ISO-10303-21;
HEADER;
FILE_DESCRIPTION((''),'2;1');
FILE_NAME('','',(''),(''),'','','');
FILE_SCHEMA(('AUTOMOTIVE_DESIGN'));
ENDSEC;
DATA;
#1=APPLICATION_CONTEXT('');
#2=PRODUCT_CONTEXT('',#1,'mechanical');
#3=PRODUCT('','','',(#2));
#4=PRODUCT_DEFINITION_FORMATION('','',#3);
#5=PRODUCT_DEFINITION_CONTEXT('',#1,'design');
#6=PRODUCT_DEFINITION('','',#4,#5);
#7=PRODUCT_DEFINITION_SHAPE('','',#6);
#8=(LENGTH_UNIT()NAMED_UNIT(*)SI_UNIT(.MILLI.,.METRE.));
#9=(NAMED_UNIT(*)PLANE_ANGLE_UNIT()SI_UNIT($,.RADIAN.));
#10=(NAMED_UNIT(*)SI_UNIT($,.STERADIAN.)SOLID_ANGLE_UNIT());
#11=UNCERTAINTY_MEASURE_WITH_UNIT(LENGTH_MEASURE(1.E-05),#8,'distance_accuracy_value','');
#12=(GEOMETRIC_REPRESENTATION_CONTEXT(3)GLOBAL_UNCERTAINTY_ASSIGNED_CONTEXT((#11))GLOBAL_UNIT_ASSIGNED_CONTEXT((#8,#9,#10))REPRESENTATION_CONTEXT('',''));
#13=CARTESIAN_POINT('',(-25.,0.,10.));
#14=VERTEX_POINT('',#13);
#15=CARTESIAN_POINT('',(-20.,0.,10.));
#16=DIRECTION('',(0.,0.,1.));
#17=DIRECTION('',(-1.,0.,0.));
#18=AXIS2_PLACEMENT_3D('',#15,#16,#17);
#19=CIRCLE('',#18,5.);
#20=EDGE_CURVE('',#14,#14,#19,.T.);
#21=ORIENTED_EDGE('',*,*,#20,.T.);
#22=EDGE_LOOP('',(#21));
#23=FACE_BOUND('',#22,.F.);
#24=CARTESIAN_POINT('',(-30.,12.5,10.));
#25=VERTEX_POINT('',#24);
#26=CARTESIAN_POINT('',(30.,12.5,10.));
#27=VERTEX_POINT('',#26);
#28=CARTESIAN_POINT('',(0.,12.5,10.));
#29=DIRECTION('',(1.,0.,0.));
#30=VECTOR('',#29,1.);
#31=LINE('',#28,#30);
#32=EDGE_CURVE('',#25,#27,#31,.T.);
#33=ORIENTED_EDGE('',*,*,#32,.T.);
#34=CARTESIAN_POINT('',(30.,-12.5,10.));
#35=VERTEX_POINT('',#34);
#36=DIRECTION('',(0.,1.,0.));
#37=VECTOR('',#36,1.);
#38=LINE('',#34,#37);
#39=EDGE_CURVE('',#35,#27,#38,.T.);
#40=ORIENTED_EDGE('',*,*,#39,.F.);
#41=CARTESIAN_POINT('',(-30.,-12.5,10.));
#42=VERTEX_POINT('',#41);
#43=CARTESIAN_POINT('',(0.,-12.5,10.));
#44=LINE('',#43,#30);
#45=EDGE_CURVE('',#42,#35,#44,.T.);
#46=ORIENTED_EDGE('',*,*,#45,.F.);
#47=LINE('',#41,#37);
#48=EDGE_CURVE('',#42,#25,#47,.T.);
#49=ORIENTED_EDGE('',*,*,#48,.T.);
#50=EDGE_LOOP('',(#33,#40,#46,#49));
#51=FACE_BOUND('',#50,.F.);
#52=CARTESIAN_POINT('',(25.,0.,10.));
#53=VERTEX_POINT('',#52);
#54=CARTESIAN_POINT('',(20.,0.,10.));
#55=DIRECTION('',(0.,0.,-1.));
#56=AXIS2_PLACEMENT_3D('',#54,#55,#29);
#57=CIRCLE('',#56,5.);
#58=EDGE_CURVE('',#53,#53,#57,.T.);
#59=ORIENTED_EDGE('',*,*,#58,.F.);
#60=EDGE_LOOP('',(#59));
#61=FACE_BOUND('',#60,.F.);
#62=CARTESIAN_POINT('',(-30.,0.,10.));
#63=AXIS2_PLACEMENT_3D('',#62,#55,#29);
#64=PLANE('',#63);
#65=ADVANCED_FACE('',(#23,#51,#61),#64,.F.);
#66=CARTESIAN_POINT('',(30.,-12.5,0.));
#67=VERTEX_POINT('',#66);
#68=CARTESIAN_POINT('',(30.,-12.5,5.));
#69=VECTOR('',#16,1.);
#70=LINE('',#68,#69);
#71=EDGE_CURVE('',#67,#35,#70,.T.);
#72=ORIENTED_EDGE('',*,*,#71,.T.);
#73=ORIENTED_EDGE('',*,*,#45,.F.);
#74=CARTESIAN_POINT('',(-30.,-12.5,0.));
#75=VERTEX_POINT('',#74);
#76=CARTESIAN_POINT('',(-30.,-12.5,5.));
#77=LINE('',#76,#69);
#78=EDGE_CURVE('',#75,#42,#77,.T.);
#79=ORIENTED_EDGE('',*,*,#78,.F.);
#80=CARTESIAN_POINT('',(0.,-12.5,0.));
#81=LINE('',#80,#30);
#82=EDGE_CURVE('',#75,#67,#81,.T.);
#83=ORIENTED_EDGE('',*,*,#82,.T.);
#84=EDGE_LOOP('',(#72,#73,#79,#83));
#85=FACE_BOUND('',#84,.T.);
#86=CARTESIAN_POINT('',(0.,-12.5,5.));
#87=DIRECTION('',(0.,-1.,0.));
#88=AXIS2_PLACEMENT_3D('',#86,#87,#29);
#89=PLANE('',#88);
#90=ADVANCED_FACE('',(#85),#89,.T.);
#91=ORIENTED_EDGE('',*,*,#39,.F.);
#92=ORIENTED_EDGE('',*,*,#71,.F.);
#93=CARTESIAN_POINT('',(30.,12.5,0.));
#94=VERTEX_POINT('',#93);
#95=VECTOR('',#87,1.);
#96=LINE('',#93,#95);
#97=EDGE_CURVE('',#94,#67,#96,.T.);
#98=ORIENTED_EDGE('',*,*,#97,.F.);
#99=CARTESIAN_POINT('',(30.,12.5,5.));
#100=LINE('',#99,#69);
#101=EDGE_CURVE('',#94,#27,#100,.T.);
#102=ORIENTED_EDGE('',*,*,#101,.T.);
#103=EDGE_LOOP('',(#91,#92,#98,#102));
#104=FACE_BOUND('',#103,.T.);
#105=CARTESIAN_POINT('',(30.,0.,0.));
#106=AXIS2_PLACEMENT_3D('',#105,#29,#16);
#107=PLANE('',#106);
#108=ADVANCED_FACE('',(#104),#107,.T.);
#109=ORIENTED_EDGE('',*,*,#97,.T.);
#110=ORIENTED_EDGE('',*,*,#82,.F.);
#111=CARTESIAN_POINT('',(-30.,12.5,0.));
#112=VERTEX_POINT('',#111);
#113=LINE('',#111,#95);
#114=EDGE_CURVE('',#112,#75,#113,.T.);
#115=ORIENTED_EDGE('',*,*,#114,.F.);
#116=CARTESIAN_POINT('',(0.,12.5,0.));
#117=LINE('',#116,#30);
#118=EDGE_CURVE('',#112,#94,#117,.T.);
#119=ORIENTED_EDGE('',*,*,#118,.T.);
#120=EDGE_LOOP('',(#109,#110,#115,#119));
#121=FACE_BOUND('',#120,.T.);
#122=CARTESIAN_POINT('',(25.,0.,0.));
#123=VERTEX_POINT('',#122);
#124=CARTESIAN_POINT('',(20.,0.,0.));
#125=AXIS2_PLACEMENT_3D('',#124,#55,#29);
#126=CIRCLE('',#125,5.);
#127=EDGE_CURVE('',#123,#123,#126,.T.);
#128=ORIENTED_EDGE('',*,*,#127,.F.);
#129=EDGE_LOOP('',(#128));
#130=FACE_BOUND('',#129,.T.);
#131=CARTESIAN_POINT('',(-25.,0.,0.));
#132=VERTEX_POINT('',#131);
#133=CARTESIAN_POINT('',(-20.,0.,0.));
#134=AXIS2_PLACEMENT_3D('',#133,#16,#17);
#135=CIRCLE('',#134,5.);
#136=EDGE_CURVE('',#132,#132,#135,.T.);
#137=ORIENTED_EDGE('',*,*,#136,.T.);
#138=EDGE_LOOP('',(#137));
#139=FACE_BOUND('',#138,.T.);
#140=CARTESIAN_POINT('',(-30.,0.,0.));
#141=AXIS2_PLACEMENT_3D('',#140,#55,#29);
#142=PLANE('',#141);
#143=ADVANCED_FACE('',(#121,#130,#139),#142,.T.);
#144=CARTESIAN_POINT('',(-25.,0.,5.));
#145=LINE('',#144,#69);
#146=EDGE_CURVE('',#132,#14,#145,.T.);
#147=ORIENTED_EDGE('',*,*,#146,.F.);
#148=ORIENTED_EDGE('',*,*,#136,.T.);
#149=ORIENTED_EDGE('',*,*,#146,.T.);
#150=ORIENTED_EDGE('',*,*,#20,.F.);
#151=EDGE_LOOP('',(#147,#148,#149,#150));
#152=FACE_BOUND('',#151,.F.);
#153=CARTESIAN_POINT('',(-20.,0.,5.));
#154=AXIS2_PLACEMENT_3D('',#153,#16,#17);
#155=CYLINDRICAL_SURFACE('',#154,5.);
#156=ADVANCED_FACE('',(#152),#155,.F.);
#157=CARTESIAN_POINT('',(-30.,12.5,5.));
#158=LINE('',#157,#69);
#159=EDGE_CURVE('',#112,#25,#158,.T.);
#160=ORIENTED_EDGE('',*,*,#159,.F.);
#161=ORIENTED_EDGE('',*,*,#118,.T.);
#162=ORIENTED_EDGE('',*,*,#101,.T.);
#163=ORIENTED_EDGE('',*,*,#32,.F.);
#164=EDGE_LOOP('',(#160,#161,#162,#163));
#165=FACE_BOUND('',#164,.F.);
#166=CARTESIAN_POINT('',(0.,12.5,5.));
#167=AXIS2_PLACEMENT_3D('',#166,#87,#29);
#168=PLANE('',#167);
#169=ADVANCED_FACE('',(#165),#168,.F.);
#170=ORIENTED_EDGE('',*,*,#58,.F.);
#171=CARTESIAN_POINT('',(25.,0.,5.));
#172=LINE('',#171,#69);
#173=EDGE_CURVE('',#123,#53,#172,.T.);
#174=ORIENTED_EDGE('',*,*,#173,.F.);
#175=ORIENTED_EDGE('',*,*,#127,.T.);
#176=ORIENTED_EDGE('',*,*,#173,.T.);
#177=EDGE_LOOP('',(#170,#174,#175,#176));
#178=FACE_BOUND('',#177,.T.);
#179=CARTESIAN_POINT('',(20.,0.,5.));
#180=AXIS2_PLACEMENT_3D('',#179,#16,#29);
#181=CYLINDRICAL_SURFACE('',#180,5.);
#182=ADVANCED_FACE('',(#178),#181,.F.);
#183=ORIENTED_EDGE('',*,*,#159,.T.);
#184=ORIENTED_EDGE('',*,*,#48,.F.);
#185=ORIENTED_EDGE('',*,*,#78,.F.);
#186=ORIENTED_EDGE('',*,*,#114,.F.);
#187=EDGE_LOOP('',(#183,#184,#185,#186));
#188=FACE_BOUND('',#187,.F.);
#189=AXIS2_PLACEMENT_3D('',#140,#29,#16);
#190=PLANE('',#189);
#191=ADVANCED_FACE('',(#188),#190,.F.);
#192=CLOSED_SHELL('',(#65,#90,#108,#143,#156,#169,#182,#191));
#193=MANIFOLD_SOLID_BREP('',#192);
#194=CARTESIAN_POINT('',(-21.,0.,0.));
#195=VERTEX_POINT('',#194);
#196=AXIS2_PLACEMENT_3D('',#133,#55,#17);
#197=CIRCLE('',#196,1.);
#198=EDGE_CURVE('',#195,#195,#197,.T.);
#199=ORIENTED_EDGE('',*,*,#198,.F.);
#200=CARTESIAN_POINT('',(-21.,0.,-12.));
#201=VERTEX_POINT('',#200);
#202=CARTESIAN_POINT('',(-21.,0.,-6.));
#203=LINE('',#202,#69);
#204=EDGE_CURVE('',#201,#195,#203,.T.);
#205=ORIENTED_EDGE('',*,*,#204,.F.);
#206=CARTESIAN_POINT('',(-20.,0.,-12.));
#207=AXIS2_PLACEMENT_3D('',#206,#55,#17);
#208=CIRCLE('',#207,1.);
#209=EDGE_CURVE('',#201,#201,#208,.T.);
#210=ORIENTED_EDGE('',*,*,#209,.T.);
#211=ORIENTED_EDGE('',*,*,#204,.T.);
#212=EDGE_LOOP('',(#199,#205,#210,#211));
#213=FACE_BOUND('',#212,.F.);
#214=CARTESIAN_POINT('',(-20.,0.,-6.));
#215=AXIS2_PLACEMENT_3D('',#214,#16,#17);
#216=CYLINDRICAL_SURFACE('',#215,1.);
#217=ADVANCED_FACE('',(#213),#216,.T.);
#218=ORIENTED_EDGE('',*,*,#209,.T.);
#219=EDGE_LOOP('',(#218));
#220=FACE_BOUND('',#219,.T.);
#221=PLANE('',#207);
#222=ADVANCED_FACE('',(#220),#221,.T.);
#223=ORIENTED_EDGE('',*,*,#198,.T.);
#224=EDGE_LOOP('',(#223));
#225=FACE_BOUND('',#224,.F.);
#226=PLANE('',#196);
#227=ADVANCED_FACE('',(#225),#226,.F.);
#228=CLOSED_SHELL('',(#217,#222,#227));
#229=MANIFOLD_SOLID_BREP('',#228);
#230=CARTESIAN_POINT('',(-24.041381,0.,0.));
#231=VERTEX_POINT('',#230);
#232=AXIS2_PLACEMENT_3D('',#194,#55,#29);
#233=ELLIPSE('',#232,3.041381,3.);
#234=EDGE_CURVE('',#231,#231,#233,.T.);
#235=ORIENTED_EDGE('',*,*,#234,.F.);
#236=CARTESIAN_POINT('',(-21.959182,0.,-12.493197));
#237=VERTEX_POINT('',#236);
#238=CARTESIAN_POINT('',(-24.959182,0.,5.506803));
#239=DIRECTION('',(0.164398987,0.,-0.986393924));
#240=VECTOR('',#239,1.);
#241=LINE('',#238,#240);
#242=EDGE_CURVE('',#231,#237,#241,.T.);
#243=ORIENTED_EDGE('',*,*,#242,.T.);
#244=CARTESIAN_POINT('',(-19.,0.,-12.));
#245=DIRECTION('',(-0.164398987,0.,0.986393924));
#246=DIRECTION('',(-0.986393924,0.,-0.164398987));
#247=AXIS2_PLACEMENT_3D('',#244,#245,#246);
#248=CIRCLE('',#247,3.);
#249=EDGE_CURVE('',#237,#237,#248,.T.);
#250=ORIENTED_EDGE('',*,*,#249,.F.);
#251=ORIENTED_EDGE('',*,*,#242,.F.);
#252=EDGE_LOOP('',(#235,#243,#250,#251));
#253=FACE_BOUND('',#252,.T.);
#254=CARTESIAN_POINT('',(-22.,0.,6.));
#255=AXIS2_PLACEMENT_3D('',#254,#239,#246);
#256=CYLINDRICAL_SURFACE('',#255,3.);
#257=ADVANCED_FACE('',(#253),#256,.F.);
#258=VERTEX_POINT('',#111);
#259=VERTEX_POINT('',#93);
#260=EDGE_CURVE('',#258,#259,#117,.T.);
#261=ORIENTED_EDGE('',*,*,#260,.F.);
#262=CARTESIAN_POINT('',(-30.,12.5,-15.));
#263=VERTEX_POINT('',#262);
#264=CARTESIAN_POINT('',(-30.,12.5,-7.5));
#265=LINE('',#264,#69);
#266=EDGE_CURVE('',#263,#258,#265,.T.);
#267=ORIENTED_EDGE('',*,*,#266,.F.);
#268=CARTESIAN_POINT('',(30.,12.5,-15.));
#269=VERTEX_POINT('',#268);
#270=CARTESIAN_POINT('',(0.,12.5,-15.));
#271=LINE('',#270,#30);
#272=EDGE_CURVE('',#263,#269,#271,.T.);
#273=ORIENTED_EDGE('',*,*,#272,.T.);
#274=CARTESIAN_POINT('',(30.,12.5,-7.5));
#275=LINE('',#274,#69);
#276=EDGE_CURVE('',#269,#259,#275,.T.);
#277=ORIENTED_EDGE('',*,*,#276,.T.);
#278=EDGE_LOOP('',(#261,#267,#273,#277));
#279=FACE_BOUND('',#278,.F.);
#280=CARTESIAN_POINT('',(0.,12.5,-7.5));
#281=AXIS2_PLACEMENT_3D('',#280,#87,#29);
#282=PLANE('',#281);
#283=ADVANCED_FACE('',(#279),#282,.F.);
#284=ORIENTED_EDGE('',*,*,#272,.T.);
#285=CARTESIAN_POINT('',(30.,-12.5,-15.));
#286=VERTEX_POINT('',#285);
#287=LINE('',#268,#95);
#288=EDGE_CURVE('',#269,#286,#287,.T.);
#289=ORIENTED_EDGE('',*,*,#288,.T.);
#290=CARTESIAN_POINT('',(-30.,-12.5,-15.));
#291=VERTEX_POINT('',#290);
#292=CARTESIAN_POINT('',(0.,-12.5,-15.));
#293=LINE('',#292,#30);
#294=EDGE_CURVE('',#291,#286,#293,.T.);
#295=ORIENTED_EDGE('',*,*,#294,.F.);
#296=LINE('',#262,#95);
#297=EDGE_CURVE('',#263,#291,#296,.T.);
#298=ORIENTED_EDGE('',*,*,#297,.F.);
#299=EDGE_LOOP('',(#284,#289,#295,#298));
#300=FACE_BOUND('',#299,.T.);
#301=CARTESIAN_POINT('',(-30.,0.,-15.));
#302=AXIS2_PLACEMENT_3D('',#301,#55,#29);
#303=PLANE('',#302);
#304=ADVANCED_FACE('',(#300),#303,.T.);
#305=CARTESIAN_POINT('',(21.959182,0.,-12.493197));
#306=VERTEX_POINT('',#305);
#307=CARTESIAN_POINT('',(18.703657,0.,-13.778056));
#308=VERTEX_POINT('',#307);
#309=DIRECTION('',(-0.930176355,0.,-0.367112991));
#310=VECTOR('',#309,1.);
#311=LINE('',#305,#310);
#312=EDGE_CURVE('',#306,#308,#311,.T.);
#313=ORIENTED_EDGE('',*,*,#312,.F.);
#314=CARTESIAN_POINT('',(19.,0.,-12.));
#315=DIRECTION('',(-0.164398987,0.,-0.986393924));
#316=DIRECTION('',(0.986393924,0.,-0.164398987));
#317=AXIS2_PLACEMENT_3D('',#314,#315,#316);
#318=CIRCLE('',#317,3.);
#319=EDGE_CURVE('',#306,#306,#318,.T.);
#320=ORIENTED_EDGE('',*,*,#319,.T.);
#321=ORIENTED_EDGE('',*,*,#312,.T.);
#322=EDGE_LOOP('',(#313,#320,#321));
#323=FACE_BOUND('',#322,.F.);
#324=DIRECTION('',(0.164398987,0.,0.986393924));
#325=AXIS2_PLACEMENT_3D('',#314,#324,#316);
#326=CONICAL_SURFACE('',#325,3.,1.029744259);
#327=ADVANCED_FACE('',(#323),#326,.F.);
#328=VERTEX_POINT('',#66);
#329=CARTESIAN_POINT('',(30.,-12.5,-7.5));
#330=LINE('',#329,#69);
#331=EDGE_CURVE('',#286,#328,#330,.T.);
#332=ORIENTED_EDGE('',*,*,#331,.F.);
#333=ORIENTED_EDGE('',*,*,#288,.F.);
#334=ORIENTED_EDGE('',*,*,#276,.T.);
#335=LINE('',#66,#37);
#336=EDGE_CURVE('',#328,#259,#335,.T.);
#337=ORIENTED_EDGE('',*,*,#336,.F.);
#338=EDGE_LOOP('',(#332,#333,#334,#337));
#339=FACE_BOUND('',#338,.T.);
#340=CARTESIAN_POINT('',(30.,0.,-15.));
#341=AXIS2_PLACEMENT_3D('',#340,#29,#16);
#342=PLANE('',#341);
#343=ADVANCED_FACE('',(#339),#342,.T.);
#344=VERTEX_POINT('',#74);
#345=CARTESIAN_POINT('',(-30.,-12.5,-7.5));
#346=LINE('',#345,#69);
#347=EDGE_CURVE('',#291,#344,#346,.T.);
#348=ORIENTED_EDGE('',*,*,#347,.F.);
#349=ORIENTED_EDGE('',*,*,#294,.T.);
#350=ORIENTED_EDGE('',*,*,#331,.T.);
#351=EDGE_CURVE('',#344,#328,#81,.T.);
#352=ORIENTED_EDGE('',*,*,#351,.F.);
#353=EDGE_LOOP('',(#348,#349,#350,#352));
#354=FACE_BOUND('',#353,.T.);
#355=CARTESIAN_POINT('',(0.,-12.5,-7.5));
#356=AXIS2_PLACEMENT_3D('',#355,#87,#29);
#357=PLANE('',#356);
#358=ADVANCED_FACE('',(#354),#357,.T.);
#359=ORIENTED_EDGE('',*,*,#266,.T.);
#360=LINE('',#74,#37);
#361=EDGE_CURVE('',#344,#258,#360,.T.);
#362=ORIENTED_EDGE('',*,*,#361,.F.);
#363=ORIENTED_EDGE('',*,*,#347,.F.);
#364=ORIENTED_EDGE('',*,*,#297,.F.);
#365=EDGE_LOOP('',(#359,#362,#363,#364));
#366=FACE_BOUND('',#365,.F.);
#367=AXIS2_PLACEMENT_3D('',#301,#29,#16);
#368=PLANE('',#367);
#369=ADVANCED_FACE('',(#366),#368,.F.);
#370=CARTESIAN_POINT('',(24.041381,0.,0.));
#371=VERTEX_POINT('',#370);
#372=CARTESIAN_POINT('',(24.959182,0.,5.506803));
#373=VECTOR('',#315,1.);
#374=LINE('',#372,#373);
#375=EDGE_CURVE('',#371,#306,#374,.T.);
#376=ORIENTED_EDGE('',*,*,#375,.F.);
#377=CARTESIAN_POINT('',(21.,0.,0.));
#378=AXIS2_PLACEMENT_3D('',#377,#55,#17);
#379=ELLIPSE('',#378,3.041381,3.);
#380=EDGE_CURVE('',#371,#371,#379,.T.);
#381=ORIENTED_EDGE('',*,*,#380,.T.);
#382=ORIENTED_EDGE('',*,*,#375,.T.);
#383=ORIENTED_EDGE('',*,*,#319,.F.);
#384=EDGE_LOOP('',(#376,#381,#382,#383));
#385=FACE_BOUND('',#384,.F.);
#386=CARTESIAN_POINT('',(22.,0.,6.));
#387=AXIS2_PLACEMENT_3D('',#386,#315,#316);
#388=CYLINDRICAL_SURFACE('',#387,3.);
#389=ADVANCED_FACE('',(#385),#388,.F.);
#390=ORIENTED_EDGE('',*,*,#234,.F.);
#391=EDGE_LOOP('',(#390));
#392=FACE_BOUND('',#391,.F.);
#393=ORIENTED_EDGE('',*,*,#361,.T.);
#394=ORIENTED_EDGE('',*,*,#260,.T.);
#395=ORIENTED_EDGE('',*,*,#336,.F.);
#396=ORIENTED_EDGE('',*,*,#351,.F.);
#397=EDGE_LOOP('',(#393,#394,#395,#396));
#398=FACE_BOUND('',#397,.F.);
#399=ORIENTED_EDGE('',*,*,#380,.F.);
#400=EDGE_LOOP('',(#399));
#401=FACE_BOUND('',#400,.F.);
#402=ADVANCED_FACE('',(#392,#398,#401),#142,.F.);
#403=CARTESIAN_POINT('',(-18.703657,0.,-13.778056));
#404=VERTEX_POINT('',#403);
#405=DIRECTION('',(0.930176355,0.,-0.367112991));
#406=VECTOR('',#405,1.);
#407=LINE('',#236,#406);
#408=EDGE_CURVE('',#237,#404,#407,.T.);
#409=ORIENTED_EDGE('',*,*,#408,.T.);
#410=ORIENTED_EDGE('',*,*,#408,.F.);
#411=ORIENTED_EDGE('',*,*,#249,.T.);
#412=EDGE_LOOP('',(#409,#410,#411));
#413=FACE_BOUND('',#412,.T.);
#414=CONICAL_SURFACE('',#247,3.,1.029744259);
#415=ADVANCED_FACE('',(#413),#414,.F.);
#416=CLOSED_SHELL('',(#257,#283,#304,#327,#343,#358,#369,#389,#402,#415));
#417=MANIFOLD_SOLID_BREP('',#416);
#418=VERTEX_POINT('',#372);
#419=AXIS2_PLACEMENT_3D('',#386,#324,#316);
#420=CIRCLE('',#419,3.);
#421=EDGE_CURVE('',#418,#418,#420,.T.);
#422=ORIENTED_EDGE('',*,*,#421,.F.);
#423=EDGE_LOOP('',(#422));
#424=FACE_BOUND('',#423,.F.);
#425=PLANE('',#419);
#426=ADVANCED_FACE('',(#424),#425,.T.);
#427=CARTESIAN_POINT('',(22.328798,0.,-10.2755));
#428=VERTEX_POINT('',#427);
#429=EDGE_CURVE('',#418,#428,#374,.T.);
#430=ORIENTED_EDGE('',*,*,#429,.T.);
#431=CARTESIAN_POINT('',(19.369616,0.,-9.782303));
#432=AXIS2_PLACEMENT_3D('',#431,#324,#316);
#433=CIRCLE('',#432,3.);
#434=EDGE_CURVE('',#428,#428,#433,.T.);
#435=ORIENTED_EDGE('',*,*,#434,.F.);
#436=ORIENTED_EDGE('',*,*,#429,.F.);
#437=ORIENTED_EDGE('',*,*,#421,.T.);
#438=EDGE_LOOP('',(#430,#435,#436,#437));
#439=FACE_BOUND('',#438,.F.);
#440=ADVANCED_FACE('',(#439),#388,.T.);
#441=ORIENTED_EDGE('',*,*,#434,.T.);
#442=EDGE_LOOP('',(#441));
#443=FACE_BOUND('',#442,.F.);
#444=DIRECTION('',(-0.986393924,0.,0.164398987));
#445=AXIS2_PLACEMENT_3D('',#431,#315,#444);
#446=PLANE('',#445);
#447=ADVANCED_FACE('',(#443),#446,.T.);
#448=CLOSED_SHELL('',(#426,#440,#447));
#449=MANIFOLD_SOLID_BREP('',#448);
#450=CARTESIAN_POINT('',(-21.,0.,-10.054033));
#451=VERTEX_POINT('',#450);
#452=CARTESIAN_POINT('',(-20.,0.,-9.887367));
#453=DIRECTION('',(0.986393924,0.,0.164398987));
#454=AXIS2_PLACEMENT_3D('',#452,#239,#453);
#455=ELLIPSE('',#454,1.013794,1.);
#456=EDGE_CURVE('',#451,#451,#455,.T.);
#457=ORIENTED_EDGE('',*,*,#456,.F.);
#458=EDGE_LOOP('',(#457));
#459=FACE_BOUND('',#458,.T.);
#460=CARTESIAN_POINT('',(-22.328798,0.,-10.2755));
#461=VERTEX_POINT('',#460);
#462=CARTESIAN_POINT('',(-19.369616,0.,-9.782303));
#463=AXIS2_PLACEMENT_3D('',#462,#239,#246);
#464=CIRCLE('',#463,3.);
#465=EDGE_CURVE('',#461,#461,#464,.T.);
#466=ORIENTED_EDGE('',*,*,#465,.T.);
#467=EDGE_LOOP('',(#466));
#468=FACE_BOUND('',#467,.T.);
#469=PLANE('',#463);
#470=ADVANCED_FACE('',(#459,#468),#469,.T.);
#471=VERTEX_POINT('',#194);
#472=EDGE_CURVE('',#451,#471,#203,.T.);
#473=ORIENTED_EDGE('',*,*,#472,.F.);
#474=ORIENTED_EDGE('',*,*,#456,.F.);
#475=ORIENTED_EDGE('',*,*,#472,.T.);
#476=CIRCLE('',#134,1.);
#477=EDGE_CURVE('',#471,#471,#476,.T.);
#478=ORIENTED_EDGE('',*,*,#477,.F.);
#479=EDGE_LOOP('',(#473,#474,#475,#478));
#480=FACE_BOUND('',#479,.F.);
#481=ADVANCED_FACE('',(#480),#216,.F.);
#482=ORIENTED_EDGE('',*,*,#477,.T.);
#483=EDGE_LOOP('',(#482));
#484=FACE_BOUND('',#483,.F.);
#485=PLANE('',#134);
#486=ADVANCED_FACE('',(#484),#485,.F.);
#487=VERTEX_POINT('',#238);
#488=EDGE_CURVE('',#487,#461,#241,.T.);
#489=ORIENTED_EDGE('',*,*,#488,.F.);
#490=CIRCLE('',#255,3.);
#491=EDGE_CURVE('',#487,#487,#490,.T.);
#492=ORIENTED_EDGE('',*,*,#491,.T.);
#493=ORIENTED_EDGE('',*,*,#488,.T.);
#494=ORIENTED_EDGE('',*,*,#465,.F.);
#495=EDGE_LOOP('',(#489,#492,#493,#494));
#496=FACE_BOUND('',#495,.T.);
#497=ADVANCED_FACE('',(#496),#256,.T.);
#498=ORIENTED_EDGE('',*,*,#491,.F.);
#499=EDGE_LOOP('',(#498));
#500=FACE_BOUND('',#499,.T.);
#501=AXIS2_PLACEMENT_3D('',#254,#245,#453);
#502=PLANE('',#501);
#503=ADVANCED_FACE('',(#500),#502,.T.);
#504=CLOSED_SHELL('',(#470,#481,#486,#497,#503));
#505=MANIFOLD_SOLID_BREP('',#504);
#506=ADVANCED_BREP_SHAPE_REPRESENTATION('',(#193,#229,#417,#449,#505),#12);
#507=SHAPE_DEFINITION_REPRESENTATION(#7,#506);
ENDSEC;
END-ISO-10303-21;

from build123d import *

# Parameters (mm, degrees)
F0_W     = 60
F0_H     = 15
F1_DEPTH = 12.5
F4_W     = 1
F4_H     = 12
F6_W     = 60
F6_H     = 10
F7_DEPTH = 12.5
F8_W     = 5
F8_H     = 10
F12_W    = 1
F12_H    = 12


# Not quite as in the source:
# - a pattern or mirror of a feature is missing from the dataset's text; its kind, count and spacing are read off the source's solid


with BuildPart() as f1:
    # F0 (on Front) → F1 (new body, symmetric)
    with BuildSketch(Plane.XZ):
        with Locations((0, -7.5)):
            Rectangle(F0_W, F0_H)
    extrude(amount=F1_DEPTH, both=True)

    # F2 (on Front) → F3 (revolve, cut)
    with BuildSketch(Plane.XZ):
        Polygon((-21.9591817715, -12.4931969619), (-18.7036573682, -13.778055791), (-22, 6), (-24.9591817715, 5.5068030381), align=None)
    f3 = revolve(axis=Axis((-20.3518286841, 0, -3.8890278955), (-0.1643989873, 0, 0.9863939238)), mode=Mode.SUBTRACT)

    # F3_copies: F3 across plane
    add(f3.mirror(Plane(origin=(0, 0, 0), x_dir=(0, 0, 1), z_dir=(1, 0, 0))), mode=Mode.SUBTRACT)


with BuildPart() as f5:
    # F4 (on Front) → F5 (revolve)
    with BuildSketch(Plane.XZ):
        with Locations((-20.5, -6)):
            Rectangle(F4_W, F4_H)
    revolve(axis=Axis((-20, 0, -6), (0, 0, -1)))


with BuildPart() as f7:
    # F6 (on Front) → F7 (new body, symmetric)
    with BuildSketch(Plane.XZ):
        with Locations((0, 5)):
            Rectangle(F6_W, F6_H)
    extrude(amount=F7_DEPTH, both=True)

    # F8 (on Front) → F9 (revolve, cut)
    with BuildSketch(Plane.XZ):
        with Locations((-22.5, 5)):
            Rectangle(F8_W, F8_H)
    f9 = revolve(axis=Axis((-20, 0, 5), (0, 0, 1)), mode=Mode.SUBTRACT)

    # F9_copies: F9 across plane
    add(f9.mirror(Plane(origin=(0, 0, 0), x_dir=(0, 0, 1), z_dir=(1, 0, 0))), mode=Mode.SUBTRACT)


with BuildPart() as f11:
    # F10 (on Front) → F11 (revolve)
    with BuildSketch(Plane.XZ):
        Polygon((-24.9591817715, 5.5068030381), (-22.3287979746, -10.2754997432), (-19.3696162031, -9.7823027813), (-22, 6), align=None)
    revolve(axis=Axis((-20.6848081016, 0, -1.8911513907), (0.1643989873, 0, -0.9863939238)))


with BuildPart() as f11_copies_1:
    # F11_copies: instance of F11
    add(f11.part.mirror(Plane(origin=(0, 0, 0), x_dir=(0, 0, 1), z_dir=(1, 0, 0))))


with BuildPart() as f11_1:
    add(f11.part)

    # F12 (on Front) → F13 (revolve, cut)
    with BuildSketch(Plane.XZ):
        with Locations((-20.5, -6)):
            Rectangle(F12_W, F12_H)
    revolve(axis=Axis((-20, 0, -6), (0, 0, 1)), mode=Mode.SUBTRACT)


solid = Compound([f1.part, f5.part, f7.part, f11_copies_1.part, f11_1.part])
